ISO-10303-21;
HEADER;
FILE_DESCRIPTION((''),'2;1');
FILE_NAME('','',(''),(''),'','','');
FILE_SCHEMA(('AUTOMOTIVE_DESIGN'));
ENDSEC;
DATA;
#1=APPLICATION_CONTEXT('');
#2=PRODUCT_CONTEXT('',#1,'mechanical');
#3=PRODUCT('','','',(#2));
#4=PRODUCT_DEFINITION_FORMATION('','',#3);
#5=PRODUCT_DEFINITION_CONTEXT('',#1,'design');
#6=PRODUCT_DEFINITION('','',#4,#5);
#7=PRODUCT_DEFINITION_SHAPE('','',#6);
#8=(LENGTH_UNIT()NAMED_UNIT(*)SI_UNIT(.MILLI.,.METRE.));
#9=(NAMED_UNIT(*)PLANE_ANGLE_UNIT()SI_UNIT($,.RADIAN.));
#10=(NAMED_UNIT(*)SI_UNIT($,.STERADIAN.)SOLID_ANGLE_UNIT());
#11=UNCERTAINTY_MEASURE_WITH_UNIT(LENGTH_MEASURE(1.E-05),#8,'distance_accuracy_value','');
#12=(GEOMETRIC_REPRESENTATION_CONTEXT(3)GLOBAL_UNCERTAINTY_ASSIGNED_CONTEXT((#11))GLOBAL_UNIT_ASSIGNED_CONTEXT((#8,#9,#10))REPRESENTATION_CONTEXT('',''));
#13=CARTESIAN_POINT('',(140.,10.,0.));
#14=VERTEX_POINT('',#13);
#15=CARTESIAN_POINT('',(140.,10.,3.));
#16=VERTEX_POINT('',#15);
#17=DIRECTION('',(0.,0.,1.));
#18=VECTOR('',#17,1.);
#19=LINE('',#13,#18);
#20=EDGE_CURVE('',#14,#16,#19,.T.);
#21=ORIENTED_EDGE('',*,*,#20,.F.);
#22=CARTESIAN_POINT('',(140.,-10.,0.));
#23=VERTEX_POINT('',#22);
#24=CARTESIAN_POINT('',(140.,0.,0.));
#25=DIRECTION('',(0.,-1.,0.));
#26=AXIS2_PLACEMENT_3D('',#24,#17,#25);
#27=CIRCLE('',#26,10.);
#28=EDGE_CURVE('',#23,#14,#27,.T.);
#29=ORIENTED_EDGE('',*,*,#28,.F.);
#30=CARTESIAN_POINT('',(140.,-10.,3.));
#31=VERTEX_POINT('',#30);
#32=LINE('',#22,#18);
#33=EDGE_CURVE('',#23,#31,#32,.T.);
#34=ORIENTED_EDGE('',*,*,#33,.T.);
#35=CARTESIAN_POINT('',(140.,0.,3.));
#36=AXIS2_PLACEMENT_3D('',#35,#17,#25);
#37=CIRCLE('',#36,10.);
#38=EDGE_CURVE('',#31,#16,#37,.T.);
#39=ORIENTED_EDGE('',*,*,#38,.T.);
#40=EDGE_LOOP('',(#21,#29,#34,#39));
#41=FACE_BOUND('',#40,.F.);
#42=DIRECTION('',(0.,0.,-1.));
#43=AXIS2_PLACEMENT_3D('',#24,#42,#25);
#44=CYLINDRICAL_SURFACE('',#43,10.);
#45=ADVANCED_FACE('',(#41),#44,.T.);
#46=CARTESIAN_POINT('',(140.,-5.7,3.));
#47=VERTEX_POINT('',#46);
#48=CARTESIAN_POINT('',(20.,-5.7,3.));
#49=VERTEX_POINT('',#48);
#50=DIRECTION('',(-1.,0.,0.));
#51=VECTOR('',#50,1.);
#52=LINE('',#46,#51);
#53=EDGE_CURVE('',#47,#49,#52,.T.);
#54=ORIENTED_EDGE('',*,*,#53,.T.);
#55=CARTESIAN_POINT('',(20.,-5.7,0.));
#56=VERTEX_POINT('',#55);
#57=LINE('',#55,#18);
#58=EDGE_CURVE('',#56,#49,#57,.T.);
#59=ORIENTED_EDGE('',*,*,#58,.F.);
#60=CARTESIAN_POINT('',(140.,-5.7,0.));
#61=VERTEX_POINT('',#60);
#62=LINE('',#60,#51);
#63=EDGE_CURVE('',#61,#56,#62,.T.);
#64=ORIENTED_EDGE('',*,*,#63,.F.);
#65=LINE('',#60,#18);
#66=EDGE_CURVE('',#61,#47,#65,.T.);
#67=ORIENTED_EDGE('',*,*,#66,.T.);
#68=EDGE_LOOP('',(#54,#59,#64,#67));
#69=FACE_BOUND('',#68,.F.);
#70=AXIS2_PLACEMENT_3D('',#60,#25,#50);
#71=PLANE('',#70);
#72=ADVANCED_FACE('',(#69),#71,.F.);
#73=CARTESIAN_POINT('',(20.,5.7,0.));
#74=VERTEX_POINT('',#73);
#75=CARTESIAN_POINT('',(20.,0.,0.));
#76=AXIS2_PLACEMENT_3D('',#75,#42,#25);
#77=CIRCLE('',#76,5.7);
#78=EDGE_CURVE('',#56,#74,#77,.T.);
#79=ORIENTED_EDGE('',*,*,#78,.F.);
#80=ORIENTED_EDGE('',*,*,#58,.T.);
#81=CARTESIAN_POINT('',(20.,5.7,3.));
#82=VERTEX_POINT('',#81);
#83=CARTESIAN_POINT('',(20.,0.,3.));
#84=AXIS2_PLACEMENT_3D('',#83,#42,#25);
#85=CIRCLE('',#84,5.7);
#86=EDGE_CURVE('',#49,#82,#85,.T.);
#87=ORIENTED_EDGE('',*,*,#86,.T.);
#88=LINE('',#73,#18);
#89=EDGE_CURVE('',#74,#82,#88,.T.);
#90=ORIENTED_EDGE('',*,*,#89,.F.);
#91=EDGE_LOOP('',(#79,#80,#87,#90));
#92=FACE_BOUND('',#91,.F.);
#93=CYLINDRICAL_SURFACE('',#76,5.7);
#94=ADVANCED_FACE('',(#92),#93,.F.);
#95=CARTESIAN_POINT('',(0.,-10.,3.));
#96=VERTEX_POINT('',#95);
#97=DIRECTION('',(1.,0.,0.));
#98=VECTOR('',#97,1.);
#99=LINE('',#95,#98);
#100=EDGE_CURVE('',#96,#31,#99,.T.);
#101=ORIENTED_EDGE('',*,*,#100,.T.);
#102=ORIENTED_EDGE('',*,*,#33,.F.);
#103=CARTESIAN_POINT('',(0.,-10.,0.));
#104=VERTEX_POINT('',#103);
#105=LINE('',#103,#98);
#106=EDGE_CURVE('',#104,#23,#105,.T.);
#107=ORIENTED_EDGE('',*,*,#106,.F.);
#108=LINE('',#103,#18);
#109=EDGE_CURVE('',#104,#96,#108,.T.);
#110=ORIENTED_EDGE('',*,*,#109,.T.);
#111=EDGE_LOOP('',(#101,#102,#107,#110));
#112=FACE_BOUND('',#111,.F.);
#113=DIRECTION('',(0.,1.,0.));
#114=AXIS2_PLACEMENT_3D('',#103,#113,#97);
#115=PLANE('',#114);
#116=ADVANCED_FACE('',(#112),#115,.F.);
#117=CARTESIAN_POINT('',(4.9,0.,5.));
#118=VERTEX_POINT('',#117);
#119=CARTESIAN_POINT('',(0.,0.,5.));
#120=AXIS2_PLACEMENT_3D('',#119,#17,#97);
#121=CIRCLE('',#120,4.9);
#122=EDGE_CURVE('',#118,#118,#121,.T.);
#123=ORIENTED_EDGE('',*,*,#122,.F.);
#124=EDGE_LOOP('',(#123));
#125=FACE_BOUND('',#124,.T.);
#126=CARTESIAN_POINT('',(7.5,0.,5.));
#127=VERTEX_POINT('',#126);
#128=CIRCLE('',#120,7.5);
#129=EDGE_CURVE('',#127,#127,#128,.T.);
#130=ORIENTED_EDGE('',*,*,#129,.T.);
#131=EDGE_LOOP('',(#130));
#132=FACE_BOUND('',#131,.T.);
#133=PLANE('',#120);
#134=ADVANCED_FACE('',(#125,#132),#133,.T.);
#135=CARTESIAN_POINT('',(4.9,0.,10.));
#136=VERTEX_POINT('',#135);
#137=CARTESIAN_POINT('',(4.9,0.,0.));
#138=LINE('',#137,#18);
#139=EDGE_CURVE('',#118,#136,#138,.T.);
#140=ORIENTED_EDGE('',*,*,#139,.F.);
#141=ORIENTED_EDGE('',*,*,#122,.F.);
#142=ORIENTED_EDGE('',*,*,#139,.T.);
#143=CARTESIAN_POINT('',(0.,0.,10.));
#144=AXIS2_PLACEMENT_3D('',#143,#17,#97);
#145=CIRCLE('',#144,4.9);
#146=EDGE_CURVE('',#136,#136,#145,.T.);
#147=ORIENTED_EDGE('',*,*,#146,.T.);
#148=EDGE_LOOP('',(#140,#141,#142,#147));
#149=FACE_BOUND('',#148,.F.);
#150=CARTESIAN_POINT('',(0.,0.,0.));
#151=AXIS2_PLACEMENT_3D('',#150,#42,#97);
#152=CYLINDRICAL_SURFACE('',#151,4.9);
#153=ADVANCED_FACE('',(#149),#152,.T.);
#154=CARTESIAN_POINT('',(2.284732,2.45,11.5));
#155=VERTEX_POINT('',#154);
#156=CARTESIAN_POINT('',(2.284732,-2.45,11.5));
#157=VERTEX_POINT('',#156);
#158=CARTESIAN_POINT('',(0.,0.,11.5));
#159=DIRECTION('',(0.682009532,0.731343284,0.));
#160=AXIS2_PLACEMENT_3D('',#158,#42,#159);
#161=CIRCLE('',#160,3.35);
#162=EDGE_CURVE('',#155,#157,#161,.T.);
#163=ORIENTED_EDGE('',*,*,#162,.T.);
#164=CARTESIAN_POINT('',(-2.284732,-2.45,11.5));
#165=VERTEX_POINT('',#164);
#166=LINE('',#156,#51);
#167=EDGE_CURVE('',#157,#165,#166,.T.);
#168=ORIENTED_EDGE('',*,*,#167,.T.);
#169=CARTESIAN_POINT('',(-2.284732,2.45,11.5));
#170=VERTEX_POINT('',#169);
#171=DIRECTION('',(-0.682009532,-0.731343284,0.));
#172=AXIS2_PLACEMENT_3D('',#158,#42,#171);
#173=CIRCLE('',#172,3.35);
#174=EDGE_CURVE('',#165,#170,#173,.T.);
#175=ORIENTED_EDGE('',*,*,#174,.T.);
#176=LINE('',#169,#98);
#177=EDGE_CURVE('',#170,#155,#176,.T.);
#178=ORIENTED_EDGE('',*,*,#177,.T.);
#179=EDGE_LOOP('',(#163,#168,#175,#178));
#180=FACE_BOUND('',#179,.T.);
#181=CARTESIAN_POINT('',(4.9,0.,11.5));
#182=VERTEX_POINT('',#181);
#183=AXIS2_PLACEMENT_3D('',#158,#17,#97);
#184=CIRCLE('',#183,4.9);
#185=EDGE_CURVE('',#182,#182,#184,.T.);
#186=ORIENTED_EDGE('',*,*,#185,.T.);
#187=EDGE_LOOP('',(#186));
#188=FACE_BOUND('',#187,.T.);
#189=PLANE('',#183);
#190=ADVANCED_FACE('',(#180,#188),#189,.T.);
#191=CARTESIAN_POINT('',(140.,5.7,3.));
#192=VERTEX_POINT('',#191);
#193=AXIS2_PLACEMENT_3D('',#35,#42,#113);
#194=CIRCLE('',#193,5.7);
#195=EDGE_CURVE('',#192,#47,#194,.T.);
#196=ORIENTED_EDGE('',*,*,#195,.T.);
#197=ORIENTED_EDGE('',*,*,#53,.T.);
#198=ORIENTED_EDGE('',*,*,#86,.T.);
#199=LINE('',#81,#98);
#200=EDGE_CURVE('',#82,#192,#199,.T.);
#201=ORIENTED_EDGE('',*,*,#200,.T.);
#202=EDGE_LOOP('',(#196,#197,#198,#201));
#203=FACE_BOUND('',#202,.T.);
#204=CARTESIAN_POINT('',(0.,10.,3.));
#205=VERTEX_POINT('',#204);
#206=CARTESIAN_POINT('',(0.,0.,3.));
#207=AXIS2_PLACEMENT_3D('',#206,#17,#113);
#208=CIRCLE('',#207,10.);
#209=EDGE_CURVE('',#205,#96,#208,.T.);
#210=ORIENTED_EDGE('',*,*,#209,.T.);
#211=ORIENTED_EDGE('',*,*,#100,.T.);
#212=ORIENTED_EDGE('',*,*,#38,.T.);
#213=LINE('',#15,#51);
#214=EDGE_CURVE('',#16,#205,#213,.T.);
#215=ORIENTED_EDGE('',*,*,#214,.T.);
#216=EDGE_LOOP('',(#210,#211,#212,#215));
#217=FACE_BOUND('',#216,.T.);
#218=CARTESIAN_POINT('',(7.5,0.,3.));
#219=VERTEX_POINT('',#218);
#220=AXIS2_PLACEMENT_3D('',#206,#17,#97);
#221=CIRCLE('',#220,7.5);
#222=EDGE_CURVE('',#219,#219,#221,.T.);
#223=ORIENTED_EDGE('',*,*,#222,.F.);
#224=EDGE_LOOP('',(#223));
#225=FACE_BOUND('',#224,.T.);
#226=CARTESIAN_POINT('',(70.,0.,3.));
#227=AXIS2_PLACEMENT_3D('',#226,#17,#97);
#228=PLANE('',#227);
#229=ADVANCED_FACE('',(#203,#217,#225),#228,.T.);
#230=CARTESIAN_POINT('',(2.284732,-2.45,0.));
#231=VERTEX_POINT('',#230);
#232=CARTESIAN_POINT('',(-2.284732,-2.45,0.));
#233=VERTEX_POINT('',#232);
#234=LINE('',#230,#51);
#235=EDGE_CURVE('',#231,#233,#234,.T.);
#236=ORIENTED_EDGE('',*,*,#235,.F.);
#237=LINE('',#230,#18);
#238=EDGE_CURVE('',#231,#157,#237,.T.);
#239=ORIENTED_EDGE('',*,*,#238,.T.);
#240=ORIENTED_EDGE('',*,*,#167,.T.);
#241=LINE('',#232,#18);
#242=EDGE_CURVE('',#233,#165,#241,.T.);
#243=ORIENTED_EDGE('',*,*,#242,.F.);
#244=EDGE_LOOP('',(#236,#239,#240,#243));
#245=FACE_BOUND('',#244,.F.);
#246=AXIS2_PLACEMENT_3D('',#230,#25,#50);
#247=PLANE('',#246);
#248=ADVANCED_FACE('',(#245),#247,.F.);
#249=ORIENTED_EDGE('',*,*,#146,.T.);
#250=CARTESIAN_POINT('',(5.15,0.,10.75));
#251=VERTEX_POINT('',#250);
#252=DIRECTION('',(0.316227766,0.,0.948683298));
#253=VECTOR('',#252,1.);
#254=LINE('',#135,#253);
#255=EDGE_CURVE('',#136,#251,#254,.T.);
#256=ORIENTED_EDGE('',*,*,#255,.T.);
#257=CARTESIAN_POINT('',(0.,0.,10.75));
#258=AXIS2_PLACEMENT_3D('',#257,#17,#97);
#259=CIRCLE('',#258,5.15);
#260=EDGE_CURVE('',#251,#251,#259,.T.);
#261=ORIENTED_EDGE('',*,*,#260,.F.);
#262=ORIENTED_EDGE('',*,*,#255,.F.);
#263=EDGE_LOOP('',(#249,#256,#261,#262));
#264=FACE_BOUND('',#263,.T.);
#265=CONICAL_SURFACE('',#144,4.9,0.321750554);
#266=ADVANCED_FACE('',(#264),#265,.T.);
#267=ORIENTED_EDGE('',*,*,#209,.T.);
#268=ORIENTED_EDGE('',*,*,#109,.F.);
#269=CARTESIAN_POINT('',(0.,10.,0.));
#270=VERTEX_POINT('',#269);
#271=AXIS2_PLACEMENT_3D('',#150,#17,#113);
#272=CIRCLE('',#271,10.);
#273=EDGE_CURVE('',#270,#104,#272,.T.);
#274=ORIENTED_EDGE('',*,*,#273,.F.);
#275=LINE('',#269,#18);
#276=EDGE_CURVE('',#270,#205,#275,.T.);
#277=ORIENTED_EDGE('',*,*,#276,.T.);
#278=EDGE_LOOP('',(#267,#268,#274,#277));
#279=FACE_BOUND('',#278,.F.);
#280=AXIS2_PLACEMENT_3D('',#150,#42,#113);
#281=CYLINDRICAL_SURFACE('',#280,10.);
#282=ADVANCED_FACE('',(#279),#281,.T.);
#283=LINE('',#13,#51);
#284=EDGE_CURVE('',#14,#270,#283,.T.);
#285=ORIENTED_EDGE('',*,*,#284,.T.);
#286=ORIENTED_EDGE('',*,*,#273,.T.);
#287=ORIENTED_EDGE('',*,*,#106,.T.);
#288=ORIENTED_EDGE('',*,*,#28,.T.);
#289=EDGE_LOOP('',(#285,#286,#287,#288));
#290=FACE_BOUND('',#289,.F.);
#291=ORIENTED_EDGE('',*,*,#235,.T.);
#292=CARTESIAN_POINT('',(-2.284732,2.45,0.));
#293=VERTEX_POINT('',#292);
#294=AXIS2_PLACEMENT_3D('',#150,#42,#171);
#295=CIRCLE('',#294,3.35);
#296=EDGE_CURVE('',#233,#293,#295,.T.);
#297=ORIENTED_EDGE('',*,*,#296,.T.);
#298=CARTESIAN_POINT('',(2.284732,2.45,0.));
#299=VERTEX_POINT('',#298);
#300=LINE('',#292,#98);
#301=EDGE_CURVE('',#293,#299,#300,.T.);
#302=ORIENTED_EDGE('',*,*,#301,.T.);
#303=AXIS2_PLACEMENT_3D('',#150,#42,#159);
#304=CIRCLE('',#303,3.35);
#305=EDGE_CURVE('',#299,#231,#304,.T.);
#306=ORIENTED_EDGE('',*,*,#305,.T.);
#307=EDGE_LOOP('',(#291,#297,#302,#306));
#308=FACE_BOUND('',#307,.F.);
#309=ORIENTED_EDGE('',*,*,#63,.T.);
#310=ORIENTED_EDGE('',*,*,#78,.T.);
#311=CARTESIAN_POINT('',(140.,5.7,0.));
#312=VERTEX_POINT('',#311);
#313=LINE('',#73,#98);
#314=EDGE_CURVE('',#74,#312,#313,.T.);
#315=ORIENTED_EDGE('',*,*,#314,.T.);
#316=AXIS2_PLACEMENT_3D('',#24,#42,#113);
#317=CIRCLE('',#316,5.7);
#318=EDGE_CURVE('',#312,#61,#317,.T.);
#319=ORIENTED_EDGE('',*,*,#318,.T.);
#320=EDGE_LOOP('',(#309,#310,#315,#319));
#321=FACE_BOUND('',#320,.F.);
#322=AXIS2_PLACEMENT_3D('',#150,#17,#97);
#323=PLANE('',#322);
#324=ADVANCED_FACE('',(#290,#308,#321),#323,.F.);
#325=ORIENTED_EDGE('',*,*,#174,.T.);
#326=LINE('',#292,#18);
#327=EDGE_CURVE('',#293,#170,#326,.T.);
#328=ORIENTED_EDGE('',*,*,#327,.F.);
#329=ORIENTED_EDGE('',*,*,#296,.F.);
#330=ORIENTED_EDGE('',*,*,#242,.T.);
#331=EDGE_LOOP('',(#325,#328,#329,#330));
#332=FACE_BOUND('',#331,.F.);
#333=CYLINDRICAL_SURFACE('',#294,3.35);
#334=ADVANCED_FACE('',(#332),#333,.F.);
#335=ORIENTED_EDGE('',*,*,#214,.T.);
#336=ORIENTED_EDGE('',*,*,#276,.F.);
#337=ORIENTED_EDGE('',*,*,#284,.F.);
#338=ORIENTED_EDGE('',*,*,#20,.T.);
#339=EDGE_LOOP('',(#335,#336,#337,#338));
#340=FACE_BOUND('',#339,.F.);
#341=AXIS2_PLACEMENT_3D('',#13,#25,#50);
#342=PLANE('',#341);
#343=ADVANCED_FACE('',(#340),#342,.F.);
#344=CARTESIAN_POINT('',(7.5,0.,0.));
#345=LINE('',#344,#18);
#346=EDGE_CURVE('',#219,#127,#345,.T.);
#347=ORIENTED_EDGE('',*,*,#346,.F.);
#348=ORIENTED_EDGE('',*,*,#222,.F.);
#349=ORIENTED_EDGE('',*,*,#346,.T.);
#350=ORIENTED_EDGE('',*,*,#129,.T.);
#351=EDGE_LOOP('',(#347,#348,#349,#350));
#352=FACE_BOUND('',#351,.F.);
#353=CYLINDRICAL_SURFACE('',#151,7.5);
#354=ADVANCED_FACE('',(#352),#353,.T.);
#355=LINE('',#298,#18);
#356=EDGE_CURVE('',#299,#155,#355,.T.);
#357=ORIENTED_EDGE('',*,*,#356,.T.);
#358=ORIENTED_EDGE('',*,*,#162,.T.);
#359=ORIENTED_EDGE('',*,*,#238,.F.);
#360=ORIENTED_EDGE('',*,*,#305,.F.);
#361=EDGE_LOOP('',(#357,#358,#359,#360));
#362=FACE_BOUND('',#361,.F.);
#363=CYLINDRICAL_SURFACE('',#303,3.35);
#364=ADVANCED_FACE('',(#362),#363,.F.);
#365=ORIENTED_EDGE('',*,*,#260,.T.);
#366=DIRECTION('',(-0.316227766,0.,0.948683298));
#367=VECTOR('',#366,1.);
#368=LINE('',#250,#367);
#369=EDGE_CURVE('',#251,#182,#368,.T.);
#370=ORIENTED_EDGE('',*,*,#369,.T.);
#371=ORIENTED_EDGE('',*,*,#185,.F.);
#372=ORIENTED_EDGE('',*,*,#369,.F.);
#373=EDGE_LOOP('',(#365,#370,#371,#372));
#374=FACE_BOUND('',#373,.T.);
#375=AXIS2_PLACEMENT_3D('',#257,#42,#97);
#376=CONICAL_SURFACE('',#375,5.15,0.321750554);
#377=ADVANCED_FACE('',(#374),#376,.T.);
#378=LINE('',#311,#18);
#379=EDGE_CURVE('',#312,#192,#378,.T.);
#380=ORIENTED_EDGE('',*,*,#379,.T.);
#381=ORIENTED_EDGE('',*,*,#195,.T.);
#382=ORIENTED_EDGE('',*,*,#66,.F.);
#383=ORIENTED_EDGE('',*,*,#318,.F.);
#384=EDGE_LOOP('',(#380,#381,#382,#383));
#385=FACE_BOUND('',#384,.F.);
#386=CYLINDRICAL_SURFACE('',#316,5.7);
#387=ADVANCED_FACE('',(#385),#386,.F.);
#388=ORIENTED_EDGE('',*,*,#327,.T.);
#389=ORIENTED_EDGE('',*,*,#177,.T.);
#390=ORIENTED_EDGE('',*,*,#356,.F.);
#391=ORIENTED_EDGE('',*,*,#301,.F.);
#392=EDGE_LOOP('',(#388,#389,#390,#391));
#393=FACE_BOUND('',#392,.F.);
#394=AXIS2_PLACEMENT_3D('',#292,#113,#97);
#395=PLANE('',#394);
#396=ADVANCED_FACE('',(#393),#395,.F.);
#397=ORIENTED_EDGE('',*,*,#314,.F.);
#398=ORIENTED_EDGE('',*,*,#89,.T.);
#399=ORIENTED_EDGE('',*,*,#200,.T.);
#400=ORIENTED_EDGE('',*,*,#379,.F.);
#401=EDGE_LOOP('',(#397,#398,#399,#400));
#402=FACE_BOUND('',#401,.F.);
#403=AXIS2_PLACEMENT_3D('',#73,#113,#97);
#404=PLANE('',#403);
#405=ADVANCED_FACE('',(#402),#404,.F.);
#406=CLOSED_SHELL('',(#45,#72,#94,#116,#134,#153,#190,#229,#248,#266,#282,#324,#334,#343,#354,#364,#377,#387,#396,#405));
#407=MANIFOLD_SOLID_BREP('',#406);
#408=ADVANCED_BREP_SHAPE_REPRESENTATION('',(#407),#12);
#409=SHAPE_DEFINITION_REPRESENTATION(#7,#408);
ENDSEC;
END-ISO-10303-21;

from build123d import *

# Parameters (mm, degrees)
F1_R     = 7.5
F2_DEPTH = 3
F1_R_2   = 4.9
F3_DEPTH = 5
F4_DEPTH = 11.5


# Not quite as in the source:
# - a feature names something its author has since deleted; it is built from what else it names


with BuildPart() as f2:
    # F1 (on Top) → F2 (new body)
    with BuildSketch(Plane.XY):
        with BuildLine():
            Line((120, 10), (0, 10))
            ThreePointArc((0, 10), (-10, 0), (0, -10))
            Line((0, -10), (120, -10))
            Line((120, -10), (140, -10))
            ThreePointArc((140, -10), (150, 0), (140, 10))
            Line((140, 10), (120, 10))
        make_face()
        Circle(F1_R, mode=Mode.SUBTRACT)
        with BuildLine():
            ThreePointArc((20, -5.7), (14.3, 0), (20, 5.7))
            Line((20, 5.7), (120, 5.7))
            Line((120, 5.7), (140, 5.7))
            ThreePointArc((140, 5.7), (145.7, 0), (140, -5.7))
            Line((140, -5.7), (120, -5.7))
            Line((120, -5.7), (20, -5.7))
        make_face(mode=Mode.SUBTRACT)
    extrude(amount=F2_DEPTH)

    # F1 (on Top) → F3 (join)
    with BuildSketch(Plane.XY):
        Circle(F1_R)
        Circle(F1_R_2, mode=Mode.SUBTRACT)
    extrude(amount=F3_DEPTH)

    # F1 (on Top) → F4 (join)
    with BuildSketch(Plane.XY):
        Circle(F1_R_2)
        with BuildLine():
            Line((2.2847319318, -2.45), (0, -2.45))
            Line((0, -2.45), (-2.2847319318, -2.45))
            ThreePointArc((-2.2847319318, -2.45), (-3.35, 0), (-2.2847319318, 2.45))
            Line((-2.2847319318, 2.45), (0, 2.45))
            Line((0, 2.45), (2.2847319318, 2.45))
            ThreePointArc((2.2847319318, 2.45), (3.35, 0), (2.2847319318, -2.45))
        make_face(mode=Mode.SUBTRACT)
    extrude(amount=F4_DEPTH)

    # F6 (on plane+point) → F7 (revolve)
    with BuildSketch(Plane.XZ):
        Polygon((5.15, 10.75), (4.9, 11.5), (4.9, 10), align=None)
    revolve(axis=Axis((0, 0, 5.75), (0, 0, 1)))


solid = f2.part
